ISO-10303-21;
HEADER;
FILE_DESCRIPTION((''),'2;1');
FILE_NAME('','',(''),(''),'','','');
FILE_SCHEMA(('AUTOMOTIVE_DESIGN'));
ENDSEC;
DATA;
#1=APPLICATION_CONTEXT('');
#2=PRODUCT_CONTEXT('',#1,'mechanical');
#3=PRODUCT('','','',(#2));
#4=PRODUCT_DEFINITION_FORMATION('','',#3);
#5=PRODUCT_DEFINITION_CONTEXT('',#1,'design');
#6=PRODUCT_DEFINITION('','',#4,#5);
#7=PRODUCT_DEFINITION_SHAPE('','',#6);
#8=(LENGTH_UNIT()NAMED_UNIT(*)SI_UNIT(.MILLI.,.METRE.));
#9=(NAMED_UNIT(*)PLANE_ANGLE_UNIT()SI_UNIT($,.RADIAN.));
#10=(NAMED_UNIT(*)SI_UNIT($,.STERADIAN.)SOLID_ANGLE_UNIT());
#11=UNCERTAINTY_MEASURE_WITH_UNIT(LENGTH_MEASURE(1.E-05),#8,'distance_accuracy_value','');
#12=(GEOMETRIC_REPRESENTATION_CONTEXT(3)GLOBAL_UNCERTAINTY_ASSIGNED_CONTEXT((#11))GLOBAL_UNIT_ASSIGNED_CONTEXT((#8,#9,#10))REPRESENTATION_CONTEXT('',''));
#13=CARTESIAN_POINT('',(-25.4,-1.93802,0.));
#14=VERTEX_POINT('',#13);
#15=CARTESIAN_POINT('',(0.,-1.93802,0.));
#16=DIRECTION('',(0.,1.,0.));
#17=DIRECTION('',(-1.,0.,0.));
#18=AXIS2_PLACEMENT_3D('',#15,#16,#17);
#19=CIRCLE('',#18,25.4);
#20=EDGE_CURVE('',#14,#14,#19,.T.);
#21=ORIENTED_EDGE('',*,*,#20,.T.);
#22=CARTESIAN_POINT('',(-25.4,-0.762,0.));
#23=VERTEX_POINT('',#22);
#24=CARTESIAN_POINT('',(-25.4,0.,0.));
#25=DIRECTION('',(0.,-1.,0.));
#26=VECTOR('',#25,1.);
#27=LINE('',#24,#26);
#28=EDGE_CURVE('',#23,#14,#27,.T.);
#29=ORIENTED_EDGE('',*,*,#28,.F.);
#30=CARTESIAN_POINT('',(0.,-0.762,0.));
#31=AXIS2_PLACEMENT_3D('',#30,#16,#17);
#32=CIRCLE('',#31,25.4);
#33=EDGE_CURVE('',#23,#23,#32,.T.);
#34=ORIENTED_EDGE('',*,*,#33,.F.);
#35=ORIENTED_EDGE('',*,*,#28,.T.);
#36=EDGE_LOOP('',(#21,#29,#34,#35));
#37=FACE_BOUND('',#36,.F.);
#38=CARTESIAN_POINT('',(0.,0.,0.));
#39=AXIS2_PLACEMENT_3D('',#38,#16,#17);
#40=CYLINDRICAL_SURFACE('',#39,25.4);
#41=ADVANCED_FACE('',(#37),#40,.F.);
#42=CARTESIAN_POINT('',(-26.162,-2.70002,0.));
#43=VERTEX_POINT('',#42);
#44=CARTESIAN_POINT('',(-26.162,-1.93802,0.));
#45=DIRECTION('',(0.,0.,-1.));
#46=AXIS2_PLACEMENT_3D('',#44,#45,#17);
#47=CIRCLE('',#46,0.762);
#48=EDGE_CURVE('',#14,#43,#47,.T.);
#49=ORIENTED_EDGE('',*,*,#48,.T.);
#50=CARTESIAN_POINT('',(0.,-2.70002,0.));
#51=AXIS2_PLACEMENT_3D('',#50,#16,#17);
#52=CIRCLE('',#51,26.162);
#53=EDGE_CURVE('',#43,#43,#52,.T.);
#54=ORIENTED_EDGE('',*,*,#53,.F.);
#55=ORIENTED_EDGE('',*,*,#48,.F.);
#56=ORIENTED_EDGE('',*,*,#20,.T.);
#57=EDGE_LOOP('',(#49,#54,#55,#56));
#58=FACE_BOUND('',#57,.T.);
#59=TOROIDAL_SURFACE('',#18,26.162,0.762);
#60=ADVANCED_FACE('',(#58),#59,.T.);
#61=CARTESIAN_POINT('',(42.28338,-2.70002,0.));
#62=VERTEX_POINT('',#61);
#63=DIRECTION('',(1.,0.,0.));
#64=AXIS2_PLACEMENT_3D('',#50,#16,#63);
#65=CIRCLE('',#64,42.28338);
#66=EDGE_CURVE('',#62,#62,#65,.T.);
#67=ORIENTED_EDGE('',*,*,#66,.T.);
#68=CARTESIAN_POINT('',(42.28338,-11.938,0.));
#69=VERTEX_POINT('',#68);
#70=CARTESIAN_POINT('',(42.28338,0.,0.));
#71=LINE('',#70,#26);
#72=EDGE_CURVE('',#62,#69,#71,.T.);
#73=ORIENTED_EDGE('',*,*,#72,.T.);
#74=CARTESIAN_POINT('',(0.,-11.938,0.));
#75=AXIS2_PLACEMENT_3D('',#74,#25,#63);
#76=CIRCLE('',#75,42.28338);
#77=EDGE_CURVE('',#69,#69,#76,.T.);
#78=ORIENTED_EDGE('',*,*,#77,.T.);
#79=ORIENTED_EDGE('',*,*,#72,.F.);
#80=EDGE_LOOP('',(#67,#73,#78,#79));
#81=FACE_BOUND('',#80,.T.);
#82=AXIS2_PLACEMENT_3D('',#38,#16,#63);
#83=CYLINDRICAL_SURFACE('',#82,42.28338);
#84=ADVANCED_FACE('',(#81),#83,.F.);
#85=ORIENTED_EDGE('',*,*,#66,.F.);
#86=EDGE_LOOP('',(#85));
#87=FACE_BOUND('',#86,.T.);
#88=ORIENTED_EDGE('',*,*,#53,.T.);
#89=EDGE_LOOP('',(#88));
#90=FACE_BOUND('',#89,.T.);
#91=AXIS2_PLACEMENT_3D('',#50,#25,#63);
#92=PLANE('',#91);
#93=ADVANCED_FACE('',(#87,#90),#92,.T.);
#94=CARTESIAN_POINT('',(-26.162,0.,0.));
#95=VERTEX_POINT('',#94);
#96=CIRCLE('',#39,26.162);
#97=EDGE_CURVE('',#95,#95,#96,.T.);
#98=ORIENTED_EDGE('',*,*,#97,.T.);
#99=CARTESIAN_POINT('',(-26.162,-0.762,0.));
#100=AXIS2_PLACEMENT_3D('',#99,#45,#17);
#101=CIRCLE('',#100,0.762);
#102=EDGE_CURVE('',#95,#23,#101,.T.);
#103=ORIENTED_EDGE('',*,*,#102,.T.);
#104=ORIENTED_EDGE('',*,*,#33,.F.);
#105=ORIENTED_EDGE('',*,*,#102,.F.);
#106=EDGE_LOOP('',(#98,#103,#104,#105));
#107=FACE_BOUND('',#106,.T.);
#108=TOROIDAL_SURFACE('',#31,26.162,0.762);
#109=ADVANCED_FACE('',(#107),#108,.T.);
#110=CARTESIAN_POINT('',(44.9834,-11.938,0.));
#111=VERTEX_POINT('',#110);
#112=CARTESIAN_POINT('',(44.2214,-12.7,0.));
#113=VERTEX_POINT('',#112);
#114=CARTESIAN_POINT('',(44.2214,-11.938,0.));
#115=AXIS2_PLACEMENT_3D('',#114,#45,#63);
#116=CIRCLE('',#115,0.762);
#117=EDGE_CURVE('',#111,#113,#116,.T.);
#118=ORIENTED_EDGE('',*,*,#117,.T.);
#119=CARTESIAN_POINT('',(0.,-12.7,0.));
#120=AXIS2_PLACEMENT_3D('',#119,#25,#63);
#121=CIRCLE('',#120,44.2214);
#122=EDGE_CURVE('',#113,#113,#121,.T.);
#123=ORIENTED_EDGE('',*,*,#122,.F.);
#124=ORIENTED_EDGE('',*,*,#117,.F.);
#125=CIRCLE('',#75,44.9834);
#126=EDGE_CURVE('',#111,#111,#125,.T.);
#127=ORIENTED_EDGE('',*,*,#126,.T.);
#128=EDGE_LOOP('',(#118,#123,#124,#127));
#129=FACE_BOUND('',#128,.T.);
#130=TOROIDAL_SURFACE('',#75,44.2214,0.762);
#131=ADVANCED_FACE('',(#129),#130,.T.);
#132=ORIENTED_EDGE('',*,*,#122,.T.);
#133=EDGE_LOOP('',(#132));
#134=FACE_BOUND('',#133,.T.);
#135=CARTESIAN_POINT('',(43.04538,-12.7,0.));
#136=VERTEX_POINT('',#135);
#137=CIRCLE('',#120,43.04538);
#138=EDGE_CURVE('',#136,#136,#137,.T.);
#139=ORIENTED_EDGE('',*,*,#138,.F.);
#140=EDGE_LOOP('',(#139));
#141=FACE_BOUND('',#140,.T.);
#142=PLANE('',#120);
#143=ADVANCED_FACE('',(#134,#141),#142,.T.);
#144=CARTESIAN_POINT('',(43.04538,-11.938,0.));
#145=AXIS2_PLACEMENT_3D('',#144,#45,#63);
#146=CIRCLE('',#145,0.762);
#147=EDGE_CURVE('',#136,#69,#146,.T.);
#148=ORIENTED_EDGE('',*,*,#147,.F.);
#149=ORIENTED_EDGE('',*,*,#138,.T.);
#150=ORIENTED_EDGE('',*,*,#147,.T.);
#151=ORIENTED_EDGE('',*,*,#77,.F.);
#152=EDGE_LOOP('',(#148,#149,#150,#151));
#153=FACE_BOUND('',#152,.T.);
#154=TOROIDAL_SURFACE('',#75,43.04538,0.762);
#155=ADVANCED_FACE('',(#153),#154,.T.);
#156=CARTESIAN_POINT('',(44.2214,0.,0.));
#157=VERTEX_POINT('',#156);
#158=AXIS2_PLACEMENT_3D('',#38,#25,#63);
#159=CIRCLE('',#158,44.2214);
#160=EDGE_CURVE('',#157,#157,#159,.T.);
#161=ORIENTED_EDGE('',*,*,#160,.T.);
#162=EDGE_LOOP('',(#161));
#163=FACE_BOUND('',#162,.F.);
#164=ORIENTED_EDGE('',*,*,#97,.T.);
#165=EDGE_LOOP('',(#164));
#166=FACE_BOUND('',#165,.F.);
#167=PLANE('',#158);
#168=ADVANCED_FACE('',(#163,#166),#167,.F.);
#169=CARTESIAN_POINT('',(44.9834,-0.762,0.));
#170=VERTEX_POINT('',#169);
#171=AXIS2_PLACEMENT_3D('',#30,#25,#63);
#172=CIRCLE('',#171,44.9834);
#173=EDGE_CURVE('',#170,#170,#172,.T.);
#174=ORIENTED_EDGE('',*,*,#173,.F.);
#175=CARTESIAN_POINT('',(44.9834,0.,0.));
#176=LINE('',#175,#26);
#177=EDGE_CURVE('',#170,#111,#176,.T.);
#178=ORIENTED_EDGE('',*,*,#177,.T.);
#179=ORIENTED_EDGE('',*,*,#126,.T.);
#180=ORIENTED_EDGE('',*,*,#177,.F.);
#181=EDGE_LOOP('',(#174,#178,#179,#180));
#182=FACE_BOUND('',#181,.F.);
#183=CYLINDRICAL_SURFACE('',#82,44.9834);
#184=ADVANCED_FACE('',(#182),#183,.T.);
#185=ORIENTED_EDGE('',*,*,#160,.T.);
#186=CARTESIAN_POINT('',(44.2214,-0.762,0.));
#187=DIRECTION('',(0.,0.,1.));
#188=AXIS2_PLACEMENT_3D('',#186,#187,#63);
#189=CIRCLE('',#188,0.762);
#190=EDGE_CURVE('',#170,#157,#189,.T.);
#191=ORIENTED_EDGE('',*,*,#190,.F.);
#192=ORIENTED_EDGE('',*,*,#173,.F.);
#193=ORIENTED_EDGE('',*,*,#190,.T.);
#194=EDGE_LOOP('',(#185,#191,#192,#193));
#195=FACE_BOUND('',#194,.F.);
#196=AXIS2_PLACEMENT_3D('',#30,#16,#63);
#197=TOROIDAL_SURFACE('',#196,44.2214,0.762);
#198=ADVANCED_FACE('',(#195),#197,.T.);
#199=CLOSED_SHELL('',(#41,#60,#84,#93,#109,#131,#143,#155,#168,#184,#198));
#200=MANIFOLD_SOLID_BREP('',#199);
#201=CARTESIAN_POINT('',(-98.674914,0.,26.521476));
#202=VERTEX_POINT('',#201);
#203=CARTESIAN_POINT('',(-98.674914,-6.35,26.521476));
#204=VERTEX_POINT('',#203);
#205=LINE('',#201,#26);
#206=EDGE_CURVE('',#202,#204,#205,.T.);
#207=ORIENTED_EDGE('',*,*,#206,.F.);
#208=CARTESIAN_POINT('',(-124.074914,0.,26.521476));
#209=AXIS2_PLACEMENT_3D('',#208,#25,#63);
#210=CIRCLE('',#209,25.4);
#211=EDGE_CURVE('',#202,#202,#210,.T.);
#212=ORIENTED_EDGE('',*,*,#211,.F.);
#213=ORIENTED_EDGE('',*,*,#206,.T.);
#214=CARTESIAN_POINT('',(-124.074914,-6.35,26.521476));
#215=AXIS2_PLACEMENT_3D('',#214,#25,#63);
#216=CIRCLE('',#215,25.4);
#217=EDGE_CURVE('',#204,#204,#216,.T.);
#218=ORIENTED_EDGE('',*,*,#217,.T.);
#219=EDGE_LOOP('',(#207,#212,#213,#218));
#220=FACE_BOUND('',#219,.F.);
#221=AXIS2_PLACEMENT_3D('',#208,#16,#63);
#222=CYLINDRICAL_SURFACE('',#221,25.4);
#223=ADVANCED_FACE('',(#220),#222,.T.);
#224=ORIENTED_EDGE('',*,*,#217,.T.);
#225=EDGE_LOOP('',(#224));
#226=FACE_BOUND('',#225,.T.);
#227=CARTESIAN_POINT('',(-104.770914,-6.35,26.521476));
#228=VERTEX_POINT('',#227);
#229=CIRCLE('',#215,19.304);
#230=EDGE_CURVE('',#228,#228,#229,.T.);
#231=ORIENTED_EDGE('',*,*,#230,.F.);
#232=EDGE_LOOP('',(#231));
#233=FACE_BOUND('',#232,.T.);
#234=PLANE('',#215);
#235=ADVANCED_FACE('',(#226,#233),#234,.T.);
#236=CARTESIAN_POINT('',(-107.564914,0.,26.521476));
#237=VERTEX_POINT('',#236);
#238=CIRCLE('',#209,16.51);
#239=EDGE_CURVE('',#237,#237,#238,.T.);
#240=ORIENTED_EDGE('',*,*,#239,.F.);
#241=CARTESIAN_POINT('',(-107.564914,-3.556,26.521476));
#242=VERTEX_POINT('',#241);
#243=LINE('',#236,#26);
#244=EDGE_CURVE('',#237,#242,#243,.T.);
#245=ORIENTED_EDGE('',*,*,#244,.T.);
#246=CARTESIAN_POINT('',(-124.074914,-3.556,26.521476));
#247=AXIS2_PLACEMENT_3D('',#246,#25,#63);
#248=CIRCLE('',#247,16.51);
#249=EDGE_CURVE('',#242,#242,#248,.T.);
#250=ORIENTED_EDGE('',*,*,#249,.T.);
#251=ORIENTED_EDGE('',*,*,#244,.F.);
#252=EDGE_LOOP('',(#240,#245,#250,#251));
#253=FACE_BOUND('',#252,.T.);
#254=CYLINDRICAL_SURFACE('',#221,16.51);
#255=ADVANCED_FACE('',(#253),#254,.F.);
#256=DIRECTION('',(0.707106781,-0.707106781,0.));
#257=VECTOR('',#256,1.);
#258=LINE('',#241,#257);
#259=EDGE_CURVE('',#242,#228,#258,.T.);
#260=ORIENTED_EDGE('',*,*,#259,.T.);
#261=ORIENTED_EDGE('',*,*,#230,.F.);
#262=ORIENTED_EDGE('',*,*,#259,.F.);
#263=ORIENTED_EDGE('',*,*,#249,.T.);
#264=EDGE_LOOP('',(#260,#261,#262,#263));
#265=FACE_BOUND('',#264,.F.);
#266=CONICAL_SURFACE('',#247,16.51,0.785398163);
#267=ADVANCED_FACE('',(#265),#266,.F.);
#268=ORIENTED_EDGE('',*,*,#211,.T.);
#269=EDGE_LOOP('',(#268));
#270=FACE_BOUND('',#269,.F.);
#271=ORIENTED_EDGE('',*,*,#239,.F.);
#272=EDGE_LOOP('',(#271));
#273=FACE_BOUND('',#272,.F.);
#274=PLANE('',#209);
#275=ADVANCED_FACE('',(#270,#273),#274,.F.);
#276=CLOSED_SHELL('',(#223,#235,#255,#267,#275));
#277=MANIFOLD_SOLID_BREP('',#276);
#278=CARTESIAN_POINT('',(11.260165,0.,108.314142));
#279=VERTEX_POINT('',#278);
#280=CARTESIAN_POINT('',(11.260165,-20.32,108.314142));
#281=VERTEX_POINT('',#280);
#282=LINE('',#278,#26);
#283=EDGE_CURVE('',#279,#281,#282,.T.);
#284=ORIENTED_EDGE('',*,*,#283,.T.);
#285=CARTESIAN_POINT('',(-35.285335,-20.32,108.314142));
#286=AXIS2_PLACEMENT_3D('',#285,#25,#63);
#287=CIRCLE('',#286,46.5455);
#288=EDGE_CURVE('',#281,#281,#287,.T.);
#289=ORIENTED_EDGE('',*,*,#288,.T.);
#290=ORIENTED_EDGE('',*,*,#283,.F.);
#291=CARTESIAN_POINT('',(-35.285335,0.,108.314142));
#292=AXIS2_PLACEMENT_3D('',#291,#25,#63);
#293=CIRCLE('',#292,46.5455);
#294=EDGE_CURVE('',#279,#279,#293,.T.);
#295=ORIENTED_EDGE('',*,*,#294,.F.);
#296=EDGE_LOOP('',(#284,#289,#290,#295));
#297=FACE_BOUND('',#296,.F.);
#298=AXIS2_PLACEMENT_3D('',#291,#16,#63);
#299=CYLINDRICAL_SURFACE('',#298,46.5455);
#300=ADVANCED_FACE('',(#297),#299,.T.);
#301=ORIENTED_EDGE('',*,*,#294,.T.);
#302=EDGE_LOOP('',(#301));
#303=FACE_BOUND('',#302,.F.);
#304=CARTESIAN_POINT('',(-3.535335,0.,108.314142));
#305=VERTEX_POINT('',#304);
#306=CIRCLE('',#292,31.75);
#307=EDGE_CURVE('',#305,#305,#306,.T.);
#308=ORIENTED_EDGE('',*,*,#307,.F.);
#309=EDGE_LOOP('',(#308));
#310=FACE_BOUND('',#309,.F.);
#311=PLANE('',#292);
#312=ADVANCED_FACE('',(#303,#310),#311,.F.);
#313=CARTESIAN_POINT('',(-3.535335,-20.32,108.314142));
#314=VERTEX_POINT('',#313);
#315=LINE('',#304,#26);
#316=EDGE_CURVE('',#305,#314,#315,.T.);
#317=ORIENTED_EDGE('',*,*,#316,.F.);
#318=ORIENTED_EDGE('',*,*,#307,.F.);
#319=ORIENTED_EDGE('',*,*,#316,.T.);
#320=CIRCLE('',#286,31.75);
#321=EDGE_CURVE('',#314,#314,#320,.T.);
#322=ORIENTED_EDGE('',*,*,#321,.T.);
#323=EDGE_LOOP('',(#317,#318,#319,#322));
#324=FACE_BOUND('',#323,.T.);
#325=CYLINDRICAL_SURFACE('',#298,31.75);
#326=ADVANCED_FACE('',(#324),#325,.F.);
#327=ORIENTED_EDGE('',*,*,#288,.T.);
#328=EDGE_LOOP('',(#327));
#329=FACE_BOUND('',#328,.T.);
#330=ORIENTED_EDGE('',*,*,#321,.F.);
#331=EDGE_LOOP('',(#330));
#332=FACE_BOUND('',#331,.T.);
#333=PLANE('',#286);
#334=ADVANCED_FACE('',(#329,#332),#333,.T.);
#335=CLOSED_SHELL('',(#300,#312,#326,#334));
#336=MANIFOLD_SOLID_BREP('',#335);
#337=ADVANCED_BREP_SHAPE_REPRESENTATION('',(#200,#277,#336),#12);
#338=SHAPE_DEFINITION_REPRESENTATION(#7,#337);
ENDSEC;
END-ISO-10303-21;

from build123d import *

# Parameters (mm, degrees)
F0_R            = 44.9834
F0_R_2          = 38.6334
F1_DEPTH        = 12.7
F2_T            = -2.70002
F3_R            = 25.4
F4_DEPTH        = 25.4
F5_R            = 0.762
F6_R            = 25.4
F6_R_2          = 16.51
F7_DEPTH        = 6.35
F8_SIZE         = 2.794
F9_R            = 46.5455
F9_R_2          = 31.75
F10_DEPTH       = 20.32
F11_W           = 44.5577651262
F11_H           = 45.586027205
F12_DEPTH       = 25.4
F14_D           = 25.4
F14_DEPTH       = 50.8
F14_CSINK_D     = 37.74948
F14_CSINK_ANGLE = 90
F14_TIP         = 7.6309298617


with BuildPart() as f1:
    # F0 (on Front) → F1 (new body)
    with BuildSketch(Plane.XZ):
        Circle(F0_R)
        Circle(F0_R_2, mode=Mode.SUBTRACT)
        Circle(F0_R_2)
    extrude(amount=F1_DEPTH)

    # F2
    f2_openings = [f1.faces().sort_by_distance(p)[0] for p in [
        (0, -12.7, 0),
    ]]
    offset(amount=F2_T, openings=f2_openings)

    # F3 (on face) → F4 (cut)
    with BuildSketch(Plane(origin=(0, 0, 0), x_dir=(-1, 0, 0), z_dir=(0, 1, 0))):
        Circle(F3_R)
    extrude(amount=-F4_DEPTH, mode=Mode.SUBTRACT)

    # F5
    f5_edges = [f1.edges().sort_by_distance(p)[0] for p in [
        (-44.9834, -12.7, 0),
        (-42.28338, -12.7, 0),
        (-44.9834, 0, 0),
        (25.4, 0, 0),
        (25.4, -2.70002, 0),
    ]]
    fillet(f5_edges, radius=F5_R)


with BuildPart() as f7:
    # F6 (on Front) → F7 (new body)
    with BuildSketch(Plane.XZ):
        with Locations((-124.0749135613, 26.5214759856)):
            Circle(F6_R)
        with Locations((-124.0749135613, 26.5214759856)):
            Circle(F6_R_2, mode=Mode.SUBTRACT)
    extrude(amount=F7_DEPTH)

    # F8
    f8_edges = [f7.edges().sort_by_distance(p)[0] for p in [
        (-140.584914, -6.35, 26.521476),
    ]]
    chamfer(f8_edges, length=F8_SIZE)


with BuildPart() as f10:
    # F9 (on Front) → F10 (new body)
    with BuildSketch(Plane.XZ):
        with Locations((-35.2853350341, 108.3141416311)):
            Circle(F9_R)
        with Locations((-35.2853350341, 108.3141416311)):
            Circle(F9_R_2, mode=Mode.SUBTRACT)
    extrude(amount=F10_DEPTH)


with BuildPart() as f12:
    # F11 (on Front) → F12 (new body)
    with BuildSketch(Plane.XZ):
        with Locations((135.7298120856, 15.5952200294)):
            Rectangle(F11_W, F11_H)
    extrude(amount=F12_DEPTH)

    # F14
    with Locations(Plane.XZ.offset(25.4)):
        with Locations((135.7298120856, 15.5952200294)):
            CounterSinkHole(F14_D / 2, F14_CSINK_D / 2, depth=F14_DEPTH, counter_sink_angle=F14_CSINK_ANGLE)
            with Locations((0, 0, -(F14_DEPTH + F14_TIP / 2))):  # 118° drill point
                Cone(0, F14_D / 2, F14_TIP, mode=Mode.SUBTRACT)


solid = Compound([f1.part, f7.part, f10.part])
